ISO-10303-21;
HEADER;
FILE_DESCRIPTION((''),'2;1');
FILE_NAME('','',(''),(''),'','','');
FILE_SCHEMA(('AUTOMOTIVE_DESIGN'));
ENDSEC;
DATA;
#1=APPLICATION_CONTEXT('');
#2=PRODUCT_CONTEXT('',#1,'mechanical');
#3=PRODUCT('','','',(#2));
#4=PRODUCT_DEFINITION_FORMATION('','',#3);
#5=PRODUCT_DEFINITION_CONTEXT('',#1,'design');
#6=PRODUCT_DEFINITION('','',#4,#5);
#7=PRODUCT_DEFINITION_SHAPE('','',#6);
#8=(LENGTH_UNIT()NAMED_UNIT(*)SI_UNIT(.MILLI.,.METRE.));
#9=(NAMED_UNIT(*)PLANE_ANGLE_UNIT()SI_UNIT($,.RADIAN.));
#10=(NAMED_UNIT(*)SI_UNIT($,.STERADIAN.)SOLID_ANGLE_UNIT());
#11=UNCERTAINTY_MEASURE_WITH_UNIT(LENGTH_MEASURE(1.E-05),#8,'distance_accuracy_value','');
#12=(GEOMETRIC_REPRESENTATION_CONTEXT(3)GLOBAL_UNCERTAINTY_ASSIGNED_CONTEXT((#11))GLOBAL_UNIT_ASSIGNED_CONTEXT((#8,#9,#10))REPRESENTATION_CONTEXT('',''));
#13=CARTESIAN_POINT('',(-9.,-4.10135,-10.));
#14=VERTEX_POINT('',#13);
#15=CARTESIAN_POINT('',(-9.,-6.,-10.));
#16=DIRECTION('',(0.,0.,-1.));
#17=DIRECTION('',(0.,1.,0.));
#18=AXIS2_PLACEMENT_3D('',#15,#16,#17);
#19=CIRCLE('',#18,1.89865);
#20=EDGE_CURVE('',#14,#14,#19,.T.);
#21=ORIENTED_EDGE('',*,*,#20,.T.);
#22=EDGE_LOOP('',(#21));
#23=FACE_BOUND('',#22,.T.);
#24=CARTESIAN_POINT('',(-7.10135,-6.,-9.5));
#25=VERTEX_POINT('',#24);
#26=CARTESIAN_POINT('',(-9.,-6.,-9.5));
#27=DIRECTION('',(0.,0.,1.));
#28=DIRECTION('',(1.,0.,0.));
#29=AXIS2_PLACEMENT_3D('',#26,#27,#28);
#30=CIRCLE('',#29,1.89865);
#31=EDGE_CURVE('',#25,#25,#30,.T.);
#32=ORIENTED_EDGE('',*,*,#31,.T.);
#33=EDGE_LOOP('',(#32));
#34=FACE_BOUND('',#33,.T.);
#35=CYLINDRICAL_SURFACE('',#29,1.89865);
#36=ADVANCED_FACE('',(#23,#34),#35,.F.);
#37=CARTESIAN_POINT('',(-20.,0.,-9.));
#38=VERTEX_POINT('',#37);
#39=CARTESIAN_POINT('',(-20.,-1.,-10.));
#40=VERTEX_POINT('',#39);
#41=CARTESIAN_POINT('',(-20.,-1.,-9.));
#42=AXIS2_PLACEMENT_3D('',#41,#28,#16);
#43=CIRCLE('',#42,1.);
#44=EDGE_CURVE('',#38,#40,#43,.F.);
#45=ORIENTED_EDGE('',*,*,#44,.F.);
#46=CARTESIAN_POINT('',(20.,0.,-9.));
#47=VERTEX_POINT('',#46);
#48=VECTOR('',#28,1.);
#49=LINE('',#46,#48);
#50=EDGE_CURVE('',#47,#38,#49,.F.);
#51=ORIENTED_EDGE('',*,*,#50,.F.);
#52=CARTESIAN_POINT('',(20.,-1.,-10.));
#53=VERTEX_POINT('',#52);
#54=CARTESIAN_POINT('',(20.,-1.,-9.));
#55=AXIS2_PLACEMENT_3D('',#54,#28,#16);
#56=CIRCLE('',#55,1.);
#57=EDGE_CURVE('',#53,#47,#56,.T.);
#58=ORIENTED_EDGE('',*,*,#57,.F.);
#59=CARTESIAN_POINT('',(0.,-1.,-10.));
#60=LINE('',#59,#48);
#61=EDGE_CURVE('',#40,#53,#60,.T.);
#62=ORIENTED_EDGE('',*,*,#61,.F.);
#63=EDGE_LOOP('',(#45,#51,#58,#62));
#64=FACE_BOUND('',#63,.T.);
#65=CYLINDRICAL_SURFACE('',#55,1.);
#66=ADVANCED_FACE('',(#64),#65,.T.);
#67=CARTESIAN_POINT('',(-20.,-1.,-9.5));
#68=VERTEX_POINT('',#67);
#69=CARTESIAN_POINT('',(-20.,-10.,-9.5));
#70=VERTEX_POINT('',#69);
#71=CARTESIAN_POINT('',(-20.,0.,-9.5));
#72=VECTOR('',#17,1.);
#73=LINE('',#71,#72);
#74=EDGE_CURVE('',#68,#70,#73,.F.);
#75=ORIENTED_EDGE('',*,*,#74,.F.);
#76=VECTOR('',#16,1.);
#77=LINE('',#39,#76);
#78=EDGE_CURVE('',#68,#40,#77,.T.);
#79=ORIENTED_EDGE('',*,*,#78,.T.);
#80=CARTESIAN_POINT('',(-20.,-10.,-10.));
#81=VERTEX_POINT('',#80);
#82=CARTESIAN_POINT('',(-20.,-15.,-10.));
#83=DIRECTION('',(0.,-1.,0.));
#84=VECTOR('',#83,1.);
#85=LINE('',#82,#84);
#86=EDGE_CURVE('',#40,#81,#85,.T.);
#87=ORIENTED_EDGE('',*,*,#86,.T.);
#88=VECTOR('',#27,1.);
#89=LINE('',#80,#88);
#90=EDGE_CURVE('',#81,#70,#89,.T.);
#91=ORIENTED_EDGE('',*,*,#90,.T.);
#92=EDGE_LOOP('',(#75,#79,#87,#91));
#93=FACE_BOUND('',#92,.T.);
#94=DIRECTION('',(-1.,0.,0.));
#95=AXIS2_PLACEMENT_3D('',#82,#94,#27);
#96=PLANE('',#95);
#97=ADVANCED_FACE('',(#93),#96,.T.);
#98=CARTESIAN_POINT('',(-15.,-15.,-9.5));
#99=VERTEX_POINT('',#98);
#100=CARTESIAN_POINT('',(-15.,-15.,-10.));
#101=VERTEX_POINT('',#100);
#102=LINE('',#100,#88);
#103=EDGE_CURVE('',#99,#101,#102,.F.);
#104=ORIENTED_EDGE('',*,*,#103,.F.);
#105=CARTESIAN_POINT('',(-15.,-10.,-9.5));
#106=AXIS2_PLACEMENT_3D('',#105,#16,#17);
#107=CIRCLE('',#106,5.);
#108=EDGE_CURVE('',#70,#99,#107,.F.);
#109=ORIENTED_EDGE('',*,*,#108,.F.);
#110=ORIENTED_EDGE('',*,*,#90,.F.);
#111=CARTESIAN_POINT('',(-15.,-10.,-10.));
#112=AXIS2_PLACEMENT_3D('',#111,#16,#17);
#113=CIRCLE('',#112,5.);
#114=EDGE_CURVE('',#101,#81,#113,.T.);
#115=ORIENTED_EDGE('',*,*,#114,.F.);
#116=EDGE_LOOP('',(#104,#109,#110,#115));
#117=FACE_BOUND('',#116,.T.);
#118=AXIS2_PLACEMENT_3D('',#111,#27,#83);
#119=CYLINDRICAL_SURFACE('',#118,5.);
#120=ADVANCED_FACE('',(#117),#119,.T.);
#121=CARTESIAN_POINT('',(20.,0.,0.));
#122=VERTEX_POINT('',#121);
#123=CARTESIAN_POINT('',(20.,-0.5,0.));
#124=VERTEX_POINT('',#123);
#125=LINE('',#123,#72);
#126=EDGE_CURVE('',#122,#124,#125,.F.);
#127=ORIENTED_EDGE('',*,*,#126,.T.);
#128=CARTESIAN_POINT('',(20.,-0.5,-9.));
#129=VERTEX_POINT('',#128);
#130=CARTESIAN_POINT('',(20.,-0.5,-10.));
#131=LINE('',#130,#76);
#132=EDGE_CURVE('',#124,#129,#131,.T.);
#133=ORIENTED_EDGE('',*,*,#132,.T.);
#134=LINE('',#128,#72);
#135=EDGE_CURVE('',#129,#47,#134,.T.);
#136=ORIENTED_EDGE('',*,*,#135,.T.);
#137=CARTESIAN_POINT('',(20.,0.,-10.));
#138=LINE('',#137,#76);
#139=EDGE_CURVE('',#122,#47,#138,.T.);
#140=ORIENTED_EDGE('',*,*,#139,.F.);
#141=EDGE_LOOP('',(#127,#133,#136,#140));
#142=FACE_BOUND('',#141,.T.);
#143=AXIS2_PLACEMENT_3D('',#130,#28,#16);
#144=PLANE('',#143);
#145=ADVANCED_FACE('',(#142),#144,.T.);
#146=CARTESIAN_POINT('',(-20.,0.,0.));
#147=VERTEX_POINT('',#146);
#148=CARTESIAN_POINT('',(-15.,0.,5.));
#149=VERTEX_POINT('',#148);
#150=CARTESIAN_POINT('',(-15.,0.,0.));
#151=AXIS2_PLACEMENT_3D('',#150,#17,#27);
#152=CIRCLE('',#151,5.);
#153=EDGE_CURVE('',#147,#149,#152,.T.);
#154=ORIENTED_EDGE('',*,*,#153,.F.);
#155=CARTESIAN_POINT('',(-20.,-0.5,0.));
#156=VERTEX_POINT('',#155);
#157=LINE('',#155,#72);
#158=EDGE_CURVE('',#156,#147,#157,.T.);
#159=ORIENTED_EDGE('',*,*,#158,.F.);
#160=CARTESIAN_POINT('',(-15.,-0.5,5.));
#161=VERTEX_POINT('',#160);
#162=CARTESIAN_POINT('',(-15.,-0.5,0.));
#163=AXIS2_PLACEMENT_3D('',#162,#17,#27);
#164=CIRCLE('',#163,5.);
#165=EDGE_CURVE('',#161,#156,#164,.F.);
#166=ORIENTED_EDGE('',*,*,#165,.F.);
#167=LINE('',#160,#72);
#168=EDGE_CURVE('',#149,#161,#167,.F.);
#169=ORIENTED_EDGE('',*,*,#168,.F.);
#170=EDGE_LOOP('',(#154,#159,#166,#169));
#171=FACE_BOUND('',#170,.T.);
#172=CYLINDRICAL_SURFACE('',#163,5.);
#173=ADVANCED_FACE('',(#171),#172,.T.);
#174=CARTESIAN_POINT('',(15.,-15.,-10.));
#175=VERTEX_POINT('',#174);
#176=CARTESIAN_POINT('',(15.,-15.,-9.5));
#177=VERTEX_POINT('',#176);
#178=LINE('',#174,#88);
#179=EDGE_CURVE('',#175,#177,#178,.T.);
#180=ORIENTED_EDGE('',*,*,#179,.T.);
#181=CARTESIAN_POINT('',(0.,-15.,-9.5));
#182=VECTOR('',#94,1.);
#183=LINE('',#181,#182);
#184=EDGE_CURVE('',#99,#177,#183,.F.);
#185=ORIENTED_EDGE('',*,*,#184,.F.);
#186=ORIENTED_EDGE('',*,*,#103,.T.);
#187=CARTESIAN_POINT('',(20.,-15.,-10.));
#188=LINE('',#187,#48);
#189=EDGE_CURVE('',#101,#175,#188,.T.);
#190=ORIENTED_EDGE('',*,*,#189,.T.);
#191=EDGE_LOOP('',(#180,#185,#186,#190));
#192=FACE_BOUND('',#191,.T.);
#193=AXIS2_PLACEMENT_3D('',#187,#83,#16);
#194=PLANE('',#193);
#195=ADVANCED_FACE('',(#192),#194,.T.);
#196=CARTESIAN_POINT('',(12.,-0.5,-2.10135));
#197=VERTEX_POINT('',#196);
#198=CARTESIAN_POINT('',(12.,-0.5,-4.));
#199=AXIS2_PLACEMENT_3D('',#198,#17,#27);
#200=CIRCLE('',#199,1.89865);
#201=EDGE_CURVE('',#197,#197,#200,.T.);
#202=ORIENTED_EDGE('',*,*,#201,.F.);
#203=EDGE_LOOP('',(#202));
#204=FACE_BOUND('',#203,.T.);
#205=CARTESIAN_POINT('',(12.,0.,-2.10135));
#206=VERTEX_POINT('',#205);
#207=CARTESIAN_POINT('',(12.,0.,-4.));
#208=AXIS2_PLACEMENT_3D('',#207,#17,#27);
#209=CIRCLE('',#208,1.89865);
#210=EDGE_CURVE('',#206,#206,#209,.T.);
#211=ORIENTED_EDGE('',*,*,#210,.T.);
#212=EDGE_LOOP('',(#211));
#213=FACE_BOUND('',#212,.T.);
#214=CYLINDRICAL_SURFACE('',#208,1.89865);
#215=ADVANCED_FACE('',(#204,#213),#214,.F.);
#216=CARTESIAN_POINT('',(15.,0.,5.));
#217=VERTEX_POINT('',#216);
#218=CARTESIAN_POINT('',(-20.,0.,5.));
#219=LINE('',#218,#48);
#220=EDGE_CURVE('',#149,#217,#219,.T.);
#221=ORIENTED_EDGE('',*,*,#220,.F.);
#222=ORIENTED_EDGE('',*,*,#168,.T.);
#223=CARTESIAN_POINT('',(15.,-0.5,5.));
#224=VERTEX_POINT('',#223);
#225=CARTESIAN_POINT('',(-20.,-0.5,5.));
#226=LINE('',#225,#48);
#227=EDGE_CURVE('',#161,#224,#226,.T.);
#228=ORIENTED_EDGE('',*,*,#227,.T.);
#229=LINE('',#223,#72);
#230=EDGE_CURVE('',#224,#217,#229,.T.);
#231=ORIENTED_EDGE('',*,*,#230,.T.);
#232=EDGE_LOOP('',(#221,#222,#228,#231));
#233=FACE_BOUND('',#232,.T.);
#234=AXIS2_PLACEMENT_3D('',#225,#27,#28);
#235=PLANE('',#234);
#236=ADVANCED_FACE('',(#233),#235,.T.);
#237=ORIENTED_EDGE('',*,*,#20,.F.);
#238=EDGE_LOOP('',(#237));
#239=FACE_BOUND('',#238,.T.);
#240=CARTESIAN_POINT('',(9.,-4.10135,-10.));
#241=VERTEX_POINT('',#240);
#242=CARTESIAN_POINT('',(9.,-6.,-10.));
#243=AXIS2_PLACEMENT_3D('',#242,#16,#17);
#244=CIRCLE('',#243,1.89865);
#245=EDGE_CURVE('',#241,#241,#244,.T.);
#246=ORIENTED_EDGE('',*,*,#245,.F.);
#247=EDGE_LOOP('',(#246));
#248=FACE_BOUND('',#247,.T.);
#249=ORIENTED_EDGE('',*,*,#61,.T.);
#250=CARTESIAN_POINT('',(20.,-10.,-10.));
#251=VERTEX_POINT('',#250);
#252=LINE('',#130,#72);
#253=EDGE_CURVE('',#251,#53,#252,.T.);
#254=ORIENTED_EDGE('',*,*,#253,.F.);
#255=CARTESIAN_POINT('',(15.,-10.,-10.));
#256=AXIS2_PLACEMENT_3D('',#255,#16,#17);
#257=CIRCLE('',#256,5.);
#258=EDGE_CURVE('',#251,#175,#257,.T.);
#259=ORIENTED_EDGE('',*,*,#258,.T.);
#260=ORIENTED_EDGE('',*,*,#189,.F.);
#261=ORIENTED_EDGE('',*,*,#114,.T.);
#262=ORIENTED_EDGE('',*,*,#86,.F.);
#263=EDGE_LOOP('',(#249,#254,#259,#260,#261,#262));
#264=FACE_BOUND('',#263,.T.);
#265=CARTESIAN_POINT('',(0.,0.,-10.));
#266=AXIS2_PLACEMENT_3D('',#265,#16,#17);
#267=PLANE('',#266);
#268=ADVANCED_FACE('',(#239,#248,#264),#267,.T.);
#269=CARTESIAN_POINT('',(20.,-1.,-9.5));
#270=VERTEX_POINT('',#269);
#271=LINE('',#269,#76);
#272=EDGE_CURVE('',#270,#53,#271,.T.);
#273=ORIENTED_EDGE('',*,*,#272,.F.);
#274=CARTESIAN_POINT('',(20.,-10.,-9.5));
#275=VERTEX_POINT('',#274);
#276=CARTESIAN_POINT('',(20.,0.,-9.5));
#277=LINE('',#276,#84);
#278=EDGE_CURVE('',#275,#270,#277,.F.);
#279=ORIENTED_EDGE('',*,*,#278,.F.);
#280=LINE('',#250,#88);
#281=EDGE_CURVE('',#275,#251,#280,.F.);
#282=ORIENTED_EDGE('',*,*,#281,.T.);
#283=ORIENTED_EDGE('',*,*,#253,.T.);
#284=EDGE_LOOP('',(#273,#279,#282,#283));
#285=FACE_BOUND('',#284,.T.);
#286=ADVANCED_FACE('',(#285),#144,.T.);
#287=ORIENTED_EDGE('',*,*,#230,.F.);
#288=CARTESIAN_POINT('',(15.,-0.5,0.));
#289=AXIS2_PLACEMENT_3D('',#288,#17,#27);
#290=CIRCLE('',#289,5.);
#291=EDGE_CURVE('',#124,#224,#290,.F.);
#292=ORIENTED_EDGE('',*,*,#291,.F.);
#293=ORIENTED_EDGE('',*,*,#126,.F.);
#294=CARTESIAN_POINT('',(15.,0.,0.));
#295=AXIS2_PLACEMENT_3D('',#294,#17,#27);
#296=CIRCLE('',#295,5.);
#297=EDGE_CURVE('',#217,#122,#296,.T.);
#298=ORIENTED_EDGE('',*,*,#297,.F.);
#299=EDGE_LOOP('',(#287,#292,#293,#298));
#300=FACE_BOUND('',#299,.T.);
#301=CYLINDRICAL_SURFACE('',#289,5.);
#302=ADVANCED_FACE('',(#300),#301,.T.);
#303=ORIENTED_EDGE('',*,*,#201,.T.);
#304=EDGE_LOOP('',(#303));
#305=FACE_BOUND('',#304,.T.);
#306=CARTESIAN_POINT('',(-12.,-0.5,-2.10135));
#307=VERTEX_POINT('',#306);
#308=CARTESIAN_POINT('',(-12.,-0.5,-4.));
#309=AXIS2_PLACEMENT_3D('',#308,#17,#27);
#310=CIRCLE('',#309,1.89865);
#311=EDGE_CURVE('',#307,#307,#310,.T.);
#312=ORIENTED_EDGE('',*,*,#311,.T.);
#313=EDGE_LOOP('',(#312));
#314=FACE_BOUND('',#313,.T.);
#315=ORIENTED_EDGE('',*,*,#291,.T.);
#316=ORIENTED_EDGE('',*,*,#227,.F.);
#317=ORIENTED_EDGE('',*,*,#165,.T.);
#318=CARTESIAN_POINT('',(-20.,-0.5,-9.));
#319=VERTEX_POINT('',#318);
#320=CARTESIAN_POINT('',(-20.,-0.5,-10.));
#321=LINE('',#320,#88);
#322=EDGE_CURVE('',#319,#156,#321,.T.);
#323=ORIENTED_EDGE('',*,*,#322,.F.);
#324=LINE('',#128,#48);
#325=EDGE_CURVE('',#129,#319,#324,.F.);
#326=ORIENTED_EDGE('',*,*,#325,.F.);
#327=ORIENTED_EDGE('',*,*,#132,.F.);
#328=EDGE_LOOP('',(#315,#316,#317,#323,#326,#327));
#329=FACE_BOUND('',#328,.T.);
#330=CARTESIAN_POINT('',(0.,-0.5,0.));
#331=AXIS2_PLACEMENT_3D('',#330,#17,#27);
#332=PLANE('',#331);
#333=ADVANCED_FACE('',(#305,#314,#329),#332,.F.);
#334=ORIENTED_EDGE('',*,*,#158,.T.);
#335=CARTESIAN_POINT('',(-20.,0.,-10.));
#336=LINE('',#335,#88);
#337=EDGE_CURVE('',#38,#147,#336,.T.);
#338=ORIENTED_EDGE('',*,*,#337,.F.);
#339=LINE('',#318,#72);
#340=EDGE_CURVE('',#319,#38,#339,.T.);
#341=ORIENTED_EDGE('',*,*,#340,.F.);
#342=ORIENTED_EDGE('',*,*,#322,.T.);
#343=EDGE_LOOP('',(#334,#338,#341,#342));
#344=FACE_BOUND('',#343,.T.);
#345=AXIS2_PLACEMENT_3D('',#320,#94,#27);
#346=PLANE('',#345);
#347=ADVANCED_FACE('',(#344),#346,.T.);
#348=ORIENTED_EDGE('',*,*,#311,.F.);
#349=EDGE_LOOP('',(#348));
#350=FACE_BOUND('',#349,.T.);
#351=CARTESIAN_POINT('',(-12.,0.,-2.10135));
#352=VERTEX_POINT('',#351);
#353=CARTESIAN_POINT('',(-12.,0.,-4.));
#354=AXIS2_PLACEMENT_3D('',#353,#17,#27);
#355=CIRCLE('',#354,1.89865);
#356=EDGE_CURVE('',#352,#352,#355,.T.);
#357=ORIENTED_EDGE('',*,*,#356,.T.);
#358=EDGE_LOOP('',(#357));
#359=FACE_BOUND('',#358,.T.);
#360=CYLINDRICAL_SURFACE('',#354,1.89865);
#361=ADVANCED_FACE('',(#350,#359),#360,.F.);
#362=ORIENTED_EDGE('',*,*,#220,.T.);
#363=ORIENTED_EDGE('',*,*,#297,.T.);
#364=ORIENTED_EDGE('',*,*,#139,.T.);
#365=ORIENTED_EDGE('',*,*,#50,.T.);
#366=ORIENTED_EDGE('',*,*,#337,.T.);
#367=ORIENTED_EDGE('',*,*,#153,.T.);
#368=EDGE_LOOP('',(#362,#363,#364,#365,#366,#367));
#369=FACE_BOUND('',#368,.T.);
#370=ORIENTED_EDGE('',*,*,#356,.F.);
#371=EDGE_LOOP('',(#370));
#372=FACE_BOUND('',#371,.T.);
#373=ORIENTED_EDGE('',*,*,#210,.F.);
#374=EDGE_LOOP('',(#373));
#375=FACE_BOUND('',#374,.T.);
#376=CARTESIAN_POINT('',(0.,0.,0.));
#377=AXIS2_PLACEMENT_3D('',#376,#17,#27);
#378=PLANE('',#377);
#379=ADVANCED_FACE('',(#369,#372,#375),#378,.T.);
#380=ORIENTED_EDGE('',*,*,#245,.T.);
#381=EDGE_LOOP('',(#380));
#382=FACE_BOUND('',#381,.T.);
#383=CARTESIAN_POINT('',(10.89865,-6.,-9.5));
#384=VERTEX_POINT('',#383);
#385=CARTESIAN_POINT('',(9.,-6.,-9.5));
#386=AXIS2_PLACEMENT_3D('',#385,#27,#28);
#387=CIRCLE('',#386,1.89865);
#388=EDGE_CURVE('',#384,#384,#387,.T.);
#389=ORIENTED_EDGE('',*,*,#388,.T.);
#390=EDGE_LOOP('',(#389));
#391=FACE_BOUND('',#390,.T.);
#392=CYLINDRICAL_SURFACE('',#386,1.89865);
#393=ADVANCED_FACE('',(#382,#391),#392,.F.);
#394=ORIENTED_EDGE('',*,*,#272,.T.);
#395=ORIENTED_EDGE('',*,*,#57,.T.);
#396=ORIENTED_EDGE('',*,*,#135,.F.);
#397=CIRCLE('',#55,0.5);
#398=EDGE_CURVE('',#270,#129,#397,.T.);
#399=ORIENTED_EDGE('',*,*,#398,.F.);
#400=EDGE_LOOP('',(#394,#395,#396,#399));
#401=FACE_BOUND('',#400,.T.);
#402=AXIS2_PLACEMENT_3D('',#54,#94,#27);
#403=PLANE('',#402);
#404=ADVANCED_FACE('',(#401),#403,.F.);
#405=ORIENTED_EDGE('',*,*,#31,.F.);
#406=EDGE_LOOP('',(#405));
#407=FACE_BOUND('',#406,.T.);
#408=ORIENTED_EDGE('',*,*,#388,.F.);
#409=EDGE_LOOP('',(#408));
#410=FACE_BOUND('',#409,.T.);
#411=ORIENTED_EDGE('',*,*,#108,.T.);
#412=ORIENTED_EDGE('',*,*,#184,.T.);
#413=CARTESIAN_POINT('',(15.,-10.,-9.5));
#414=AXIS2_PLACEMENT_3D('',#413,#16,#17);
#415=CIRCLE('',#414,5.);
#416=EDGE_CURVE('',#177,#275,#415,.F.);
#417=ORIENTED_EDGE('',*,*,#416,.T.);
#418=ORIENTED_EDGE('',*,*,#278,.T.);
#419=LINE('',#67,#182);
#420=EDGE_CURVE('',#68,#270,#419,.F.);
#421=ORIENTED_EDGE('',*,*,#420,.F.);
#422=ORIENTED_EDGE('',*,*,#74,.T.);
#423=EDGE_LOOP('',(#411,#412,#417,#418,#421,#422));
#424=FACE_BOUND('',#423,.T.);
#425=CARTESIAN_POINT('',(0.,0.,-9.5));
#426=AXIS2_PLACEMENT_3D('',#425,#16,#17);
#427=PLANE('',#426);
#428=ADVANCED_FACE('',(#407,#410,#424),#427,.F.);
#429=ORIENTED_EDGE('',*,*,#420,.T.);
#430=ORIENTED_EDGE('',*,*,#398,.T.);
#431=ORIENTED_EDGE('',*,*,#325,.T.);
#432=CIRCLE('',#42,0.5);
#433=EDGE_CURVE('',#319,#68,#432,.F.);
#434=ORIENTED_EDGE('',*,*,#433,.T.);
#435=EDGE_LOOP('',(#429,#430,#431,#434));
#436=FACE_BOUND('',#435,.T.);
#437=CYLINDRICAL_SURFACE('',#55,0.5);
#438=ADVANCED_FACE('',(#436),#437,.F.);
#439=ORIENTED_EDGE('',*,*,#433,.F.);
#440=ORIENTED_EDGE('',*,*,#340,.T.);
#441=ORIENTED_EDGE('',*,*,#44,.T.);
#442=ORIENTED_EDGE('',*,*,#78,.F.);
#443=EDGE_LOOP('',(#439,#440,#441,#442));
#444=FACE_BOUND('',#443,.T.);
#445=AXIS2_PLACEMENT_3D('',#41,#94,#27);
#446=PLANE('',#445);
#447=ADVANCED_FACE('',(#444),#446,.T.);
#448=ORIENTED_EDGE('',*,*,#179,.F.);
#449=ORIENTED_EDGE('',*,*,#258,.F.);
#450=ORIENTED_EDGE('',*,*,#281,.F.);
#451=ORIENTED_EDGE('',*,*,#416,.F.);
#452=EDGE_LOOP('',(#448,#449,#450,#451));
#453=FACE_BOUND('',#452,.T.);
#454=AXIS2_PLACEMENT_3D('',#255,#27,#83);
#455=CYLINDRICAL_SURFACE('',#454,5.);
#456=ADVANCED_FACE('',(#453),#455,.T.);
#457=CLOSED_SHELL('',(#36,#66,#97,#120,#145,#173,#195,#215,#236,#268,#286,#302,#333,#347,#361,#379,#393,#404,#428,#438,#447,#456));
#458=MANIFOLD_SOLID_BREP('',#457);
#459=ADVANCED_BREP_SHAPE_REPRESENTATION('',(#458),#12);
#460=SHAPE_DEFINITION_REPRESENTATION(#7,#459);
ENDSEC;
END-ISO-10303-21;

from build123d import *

# Parameters (mm, degrees)
SKETCH1_W                    = 40
SKETCH1_H                    = 15
BASE_FLANGE1_DEPTH           = 0.5
EDGE_FLANGE1_STRIP_W         = 3
EDGE_FLANGE1_STRIP_H         = 0.5
EDGE_FLANGE1_STRIP_CUT_DEPTH = 40
EDGE_FLANGE1_DEPTH           = 40
F_6_CLEARANCE_HOLE2_D        = 3.7973
F_6_CLEARANCE_HOLE2_DEPTH    = 10
F_6_CLEARANCE_HOLE2_TIP      = 1.140824014
F_6_CLEARANCE_HOLE3_D        = 3.7973
BREAK_CORNER1_START          = -10
BREAK_CORNER1_DEPTH          = 0.5
BREAK_CORNER1_START_2        = -0.5
BREAK_CORNER1_2_DEPTH        = 0.5


# Read off the part's stored shape, not the designer's step: Break-Corner1
# Sheet-metal steps are written as plain solids
with BuildPart() as part:
    # Sketch1 → Base-Flange1 (new body)
    with BuildSketch(Plane(origin=(0, 0, 0), x_dir=(1, 0, 0), z_dir=(0, 1, 0))):
        with Locations((0, 2.5)):
            Rectangle(SKETCH1_W, SKETCH1_H)
    extrude(amount=-BASE_FLANGE1_DEPTH)

    # Edge-Flange1 strip (across the edge) → Edge-Flange1 strip cut (cut)
    with BuildSketch(Plane(origin=(-20, -0.5, -10), x_dir=(0, 0, 1), z_dir=(1, 0, 0))):
        with Locations((-0.5, -0.25)):
            Rectangle(EDGE_FLANGE1_STRIP_W, EDGE_FLANGE1_STRIP_H)
    extrude(amount=EDGE_FLANGE1_STRIP_CUT_DEPTH, mode=Mode.SUBTRACT)

    # Edge-Flange1 section (across the edge) → Edge-Flange1 (add)
    with BuildSketch(Plane(origin=(-20, -0.5, -10), x_dir=(0, 0, 1), z_dir=(1, 0, 0))):
        with BuildLine():
            Line((0, 0.5), (0, 14.5))
            Line((0, 14.5), (0.5, 14.5))
            Line((0.5, 14.5), (0.5, 0.5))
            ThreePointArc((0.5, 0.5), (0.646446609, 0.146446609), (1, 0))
            Line((1, 0), (1, -0.5))
            ThreePointArc((1, -0.5), (0.292893219, -0.207106781), (0, 0.5))
        make_face()
    extrude(amount=EDGE_FLANGE1_DEPTH)

    # #6 Clearance Hole2
    with Locations(Plane.XY.offset(-9.5)):
        with Locations((-9, -6), (9, -6)):
            Hole(F_6_CLEARANCE_HOLE2_D / 2, depth=F_6_CLEARANCE_HOLE2_DEPTH)
            with Locations((0, 0, -(F_6_CLEARANCE_HOLE2_DEPTH + F_6_CLEARANCE_HOLE2_TIP / 2))):  # 118° drill point
                Cone(0, F_6_CLEARANCE_HOLE2_D / 2, F_6_CLEARANCE_HOLE2_TIP, mode=Mode.SUBTRACT)

    # #6 Clearance Hole3 (through all)
    with Locations(Plane(origin=(0, 0, 0), x_dir=(1, 0, 0), z_dir=(0, 1, 0))):
        with Locations((12, 4), (-12, 4)):
            Hole(F_6_CLEARANCE_HOLE3_D / 2)

    # Break-Corner1 outline → Break-Corner1 (cut)
    with BuildSketch(Plane.XY.offset(BREAK_CORNER1_START)):
        with BuildLine():
            Line((-20, -15), (-15, -15))
            ThreePointArc((-15, -15), (-18.535533906, -13.535533906), (-20, -10))
            Line((-20, -10), (-20, -15))
        make_face()
        with BuildLine():
            ThreePointArc((20, -10), (18.535533906, -13.535533906), (15, -15))
            Line((15, -15), (20, -15))
            Line((20, -15), (20, -10))
        make_face()
    extrude(amount=BREAK_CORNER1_DEPTH, mode=Mode.SUBTRACT)

    # Break-Corner1 2 outline → Break-Corner1 2 (cut)
    with BuildSketch(Plane(origin=(0, 0, 0), x_dir=(1, 0, 0), z_dir=(0, 1, 0)).offset(BREAK_CORNER1_START_2)):
        with BuildLine():
            ThreePointArc((20, 0), (18.535533906, -3.535533906), (15, -5))
            Line((15, -5), (20, -5))
            Line((20, -5), (20, 0))
        make_face()
        with BuildLine():
            ThreePointArc((-15, -5), (-18.535533906, -3.535533906), (-20, 0))
            Line((-20, 0), (-20, -5))
            Line((-20, -5), (-15, -5))
        make_face()
    extrude(amount=BREAK_CORNER1_2_DEPTH, mode=Mode.SUBTRACT)


solid = part.part
